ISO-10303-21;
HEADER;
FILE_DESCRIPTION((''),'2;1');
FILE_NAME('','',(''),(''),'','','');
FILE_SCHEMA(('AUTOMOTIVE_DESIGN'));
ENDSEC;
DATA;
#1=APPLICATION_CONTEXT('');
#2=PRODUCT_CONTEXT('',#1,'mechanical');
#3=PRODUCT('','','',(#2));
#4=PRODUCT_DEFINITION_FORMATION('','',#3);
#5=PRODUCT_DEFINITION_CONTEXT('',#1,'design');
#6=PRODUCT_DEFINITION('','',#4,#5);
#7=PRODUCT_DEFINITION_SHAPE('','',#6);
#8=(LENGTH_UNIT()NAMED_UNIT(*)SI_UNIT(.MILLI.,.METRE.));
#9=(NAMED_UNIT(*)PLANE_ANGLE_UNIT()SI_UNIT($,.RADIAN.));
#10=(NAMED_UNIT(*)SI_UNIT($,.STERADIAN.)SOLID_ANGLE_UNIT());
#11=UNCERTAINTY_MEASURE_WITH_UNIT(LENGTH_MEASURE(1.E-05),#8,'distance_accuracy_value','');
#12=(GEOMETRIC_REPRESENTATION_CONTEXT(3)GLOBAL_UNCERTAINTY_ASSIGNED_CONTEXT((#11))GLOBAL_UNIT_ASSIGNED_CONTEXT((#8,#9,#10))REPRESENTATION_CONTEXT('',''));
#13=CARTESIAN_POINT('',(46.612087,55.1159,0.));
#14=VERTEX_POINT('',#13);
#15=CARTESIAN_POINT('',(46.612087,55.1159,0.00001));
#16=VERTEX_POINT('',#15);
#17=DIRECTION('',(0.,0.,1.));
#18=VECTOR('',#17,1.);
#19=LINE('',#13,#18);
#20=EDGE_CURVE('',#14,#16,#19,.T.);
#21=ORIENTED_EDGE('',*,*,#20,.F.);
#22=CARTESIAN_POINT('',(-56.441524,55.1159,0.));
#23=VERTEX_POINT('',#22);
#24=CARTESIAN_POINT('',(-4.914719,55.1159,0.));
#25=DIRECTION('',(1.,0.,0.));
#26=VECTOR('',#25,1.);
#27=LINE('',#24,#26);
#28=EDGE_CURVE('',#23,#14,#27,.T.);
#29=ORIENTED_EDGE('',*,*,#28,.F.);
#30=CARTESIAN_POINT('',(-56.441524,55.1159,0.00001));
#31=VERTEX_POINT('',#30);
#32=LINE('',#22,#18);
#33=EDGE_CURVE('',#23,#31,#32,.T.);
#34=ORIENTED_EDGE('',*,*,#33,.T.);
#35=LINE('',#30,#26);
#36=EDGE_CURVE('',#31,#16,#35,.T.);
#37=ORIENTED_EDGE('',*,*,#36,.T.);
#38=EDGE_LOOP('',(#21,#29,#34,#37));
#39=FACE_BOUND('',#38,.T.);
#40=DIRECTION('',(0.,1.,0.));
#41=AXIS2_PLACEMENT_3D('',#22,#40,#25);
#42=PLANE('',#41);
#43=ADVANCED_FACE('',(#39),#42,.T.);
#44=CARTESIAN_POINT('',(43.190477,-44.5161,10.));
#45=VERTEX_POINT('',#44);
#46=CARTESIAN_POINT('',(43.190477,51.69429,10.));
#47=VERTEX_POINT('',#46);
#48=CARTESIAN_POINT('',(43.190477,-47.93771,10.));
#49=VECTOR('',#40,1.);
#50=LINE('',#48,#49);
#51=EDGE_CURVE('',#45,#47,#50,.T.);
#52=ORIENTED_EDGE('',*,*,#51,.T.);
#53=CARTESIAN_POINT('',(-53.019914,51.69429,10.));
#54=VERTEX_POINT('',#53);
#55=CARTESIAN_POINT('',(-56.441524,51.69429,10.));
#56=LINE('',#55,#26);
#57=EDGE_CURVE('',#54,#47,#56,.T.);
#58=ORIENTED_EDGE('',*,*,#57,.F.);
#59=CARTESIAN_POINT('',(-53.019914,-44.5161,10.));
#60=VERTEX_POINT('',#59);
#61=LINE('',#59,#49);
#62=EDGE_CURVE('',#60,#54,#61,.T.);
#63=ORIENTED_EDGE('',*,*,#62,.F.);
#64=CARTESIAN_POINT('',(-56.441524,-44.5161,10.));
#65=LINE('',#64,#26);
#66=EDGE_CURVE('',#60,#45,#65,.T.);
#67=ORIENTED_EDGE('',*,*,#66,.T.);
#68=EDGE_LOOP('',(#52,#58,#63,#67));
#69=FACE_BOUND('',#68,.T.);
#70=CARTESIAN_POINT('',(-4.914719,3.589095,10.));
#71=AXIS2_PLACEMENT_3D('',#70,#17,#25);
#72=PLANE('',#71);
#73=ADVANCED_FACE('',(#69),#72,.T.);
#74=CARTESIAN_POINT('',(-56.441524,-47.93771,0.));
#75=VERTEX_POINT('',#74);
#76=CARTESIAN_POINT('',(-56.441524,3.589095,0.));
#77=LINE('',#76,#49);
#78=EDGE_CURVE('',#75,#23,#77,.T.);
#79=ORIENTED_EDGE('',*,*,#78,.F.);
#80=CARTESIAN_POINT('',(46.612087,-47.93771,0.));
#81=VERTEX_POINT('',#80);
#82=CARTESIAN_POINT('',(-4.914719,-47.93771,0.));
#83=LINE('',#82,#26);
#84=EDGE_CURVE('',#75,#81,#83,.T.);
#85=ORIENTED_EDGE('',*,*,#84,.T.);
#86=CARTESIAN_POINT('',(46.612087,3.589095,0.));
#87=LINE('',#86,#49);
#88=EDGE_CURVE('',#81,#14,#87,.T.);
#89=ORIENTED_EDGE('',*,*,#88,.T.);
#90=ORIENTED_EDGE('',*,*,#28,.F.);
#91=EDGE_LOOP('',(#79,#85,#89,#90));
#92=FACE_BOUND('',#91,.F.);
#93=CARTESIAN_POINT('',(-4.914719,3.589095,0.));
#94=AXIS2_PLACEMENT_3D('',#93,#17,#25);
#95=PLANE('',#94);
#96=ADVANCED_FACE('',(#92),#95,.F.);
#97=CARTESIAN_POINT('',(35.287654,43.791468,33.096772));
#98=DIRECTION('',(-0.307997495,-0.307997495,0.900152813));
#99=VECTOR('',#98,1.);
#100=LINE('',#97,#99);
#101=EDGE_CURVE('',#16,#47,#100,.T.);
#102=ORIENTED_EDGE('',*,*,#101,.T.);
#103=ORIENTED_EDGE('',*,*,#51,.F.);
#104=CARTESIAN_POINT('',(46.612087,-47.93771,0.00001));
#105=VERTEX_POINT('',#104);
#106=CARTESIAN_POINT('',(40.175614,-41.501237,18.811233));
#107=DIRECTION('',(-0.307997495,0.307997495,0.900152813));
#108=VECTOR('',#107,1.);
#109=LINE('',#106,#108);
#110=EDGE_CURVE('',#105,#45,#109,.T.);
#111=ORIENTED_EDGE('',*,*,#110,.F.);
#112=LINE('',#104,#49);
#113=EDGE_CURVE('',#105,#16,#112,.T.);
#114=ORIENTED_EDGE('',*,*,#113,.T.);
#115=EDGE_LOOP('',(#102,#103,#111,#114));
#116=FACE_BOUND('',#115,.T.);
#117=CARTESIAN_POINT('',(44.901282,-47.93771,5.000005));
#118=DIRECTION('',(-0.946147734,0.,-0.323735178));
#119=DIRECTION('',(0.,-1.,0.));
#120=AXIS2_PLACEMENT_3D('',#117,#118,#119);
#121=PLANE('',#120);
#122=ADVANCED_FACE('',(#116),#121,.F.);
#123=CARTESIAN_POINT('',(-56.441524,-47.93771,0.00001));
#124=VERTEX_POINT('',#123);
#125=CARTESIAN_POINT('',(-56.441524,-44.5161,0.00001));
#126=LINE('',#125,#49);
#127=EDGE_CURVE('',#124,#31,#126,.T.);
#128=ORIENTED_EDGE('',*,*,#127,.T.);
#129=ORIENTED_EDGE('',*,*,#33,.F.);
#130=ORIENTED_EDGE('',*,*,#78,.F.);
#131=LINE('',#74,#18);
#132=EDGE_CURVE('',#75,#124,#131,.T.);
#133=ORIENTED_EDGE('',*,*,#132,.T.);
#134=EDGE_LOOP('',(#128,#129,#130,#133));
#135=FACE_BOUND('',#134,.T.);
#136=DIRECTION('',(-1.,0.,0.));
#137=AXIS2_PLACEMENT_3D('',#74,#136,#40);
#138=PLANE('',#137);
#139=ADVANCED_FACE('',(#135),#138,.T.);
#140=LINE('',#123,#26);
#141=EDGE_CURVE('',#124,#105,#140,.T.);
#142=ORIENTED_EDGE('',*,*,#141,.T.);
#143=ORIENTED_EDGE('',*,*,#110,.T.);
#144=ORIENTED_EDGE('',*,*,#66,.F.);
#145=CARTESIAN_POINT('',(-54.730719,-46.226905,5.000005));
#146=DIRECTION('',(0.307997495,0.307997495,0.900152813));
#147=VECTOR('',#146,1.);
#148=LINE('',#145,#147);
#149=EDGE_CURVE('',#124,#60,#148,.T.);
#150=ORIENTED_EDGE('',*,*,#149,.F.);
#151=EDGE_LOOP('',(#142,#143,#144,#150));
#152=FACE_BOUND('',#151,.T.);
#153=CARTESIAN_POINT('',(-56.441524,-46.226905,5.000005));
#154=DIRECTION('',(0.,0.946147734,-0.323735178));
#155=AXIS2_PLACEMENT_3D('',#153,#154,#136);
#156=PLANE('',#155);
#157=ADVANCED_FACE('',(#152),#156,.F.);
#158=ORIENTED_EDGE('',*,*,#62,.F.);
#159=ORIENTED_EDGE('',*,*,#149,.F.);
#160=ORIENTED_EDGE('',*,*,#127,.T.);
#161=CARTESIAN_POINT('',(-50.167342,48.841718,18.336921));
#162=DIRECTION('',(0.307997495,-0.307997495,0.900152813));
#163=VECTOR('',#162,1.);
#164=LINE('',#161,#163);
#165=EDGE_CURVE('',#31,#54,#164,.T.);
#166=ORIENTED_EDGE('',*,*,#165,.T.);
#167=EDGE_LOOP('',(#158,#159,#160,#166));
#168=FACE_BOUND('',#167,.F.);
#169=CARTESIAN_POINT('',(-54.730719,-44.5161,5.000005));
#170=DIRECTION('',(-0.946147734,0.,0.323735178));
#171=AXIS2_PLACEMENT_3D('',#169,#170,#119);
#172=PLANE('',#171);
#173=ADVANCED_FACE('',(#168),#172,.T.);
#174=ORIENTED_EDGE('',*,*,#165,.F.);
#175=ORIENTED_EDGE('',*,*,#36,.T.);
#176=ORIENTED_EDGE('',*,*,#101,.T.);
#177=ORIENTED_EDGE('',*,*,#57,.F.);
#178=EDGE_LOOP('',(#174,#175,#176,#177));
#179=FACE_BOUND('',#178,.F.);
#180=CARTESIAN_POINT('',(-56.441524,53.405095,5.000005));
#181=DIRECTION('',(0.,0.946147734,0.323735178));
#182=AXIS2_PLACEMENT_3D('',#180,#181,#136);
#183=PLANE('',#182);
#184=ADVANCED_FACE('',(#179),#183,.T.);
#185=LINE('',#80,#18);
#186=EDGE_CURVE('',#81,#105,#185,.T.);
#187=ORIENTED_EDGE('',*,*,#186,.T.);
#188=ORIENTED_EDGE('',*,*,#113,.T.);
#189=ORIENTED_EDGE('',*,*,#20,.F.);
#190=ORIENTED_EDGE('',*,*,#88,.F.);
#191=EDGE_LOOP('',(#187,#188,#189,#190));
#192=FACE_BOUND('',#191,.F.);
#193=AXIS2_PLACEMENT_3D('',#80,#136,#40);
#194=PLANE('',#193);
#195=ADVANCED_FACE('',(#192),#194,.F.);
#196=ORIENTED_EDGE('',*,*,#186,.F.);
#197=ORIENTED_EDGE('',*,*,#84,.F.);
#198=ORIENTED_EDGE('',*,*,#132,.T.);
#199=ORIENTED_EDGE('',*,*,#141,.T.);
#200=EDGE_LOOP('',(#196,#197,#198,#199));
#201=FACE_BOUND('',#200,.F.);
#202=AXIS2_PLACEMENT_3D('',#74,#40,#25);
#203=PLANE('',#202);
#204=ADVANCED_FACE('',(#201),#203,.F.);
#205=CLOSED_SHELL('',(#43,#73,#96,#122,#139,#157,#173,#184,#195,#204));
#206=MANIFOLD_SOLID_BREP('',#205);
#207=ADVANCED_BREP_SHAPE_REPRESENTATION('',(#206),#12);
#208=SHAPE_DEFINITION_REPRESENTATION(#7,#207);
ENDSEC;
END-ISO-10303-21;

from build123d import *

# Parameters (mm, degrees)
F0_W     = 103.053610972
F0_H     = 103.053610972
F1_DEPTH = 10
F2_SIZE2 = 3.42161
F2_SIZE  = 9.99999
F3_SIZE2 = 3.42161
F3_SIZE  = 9.99999
F4_SIZE2 = 3.42161
F4_SIZE  = 9.99999
F5_SIZE2 = 3.42161
F5_SIZE  = 9.99999


# Not quite as in the source:
# - a fillet or chamfer is up to 0.001 mm smaller than in the source, because OpenCascade refuses the exact size


with BuildPart() as f1:
    # F0 (on Top) → F1 (new body)
    with BuildSketch(Plane.XY):
        with Locations((-4.9147187663, 3.5890949971)):
            Rectangle(F0_W, F0_H)
    extrude(amount=F1_DEPTH)

    # F2 (size 10 and 3.421620486 in the source; OpenCascade refuses exactly that, so slightly less here)
    f2_edges = [f1.edges().sort_by_distance(p)[0] for p in [
        (46.612087, 3.589095, 10),
    ]]
    f2_side = f1.faces().sort_by_distance((46.612087, 3.589095, 5))[0]
    chamfer(f2_edges, length=F2_SIZE, length2=F2_SIZE2, reference=f2_side)

    # F3 (size 10 and 3.421620486 in the source; OpenCascade refuses exactly that, so slightly less here)
    f3_edges = [f1.edges().sort_by_distance(p)[0] for p in [
        (-6.625524, 55.1159, 10),
    ]]
    f3_side = f1.faces().sort_by_distance((-5.765307, 55.1159, 4.971864))[0]
    chamfer(f3_edges, length=F3_SIZE, length2=F3_SIZE2, reference=f3_side)

    # F4 (size 10 and 3.421620486 in the source; OpenCascade refuses exactly that, so slightly less here)
    f4_edges = [f1.edges().sort_by_distance(p)[0] for p in [
        (-6.625524, -47.93771, 10),
    ]]
    f4_side = f1.faces().sort_by_distance((-5.765307, -47.93771, 4.971864))[0]
    chamfer(f4_edges, length=F4_SIZE, length2=F4_SIZE2, reference=f4_side)

    # F5 (size 10 and 3.421620486 in the source; OpenCascade refuses exactly that, so slightly less here)
    f5_edges = [f1.edges().sort_by_distance(p)[0] for p in [
        (-56.441524, 3.589095, 10),
    ]]
    f5_side = f1.faces().sort_by_distance((-56.441524, 3.589095, 4.942762))[0]
    chamfer(f5_edges, length=F5_SIZE, length2=F5_SIZE2, reference=f5_side)


solid = f1.part
